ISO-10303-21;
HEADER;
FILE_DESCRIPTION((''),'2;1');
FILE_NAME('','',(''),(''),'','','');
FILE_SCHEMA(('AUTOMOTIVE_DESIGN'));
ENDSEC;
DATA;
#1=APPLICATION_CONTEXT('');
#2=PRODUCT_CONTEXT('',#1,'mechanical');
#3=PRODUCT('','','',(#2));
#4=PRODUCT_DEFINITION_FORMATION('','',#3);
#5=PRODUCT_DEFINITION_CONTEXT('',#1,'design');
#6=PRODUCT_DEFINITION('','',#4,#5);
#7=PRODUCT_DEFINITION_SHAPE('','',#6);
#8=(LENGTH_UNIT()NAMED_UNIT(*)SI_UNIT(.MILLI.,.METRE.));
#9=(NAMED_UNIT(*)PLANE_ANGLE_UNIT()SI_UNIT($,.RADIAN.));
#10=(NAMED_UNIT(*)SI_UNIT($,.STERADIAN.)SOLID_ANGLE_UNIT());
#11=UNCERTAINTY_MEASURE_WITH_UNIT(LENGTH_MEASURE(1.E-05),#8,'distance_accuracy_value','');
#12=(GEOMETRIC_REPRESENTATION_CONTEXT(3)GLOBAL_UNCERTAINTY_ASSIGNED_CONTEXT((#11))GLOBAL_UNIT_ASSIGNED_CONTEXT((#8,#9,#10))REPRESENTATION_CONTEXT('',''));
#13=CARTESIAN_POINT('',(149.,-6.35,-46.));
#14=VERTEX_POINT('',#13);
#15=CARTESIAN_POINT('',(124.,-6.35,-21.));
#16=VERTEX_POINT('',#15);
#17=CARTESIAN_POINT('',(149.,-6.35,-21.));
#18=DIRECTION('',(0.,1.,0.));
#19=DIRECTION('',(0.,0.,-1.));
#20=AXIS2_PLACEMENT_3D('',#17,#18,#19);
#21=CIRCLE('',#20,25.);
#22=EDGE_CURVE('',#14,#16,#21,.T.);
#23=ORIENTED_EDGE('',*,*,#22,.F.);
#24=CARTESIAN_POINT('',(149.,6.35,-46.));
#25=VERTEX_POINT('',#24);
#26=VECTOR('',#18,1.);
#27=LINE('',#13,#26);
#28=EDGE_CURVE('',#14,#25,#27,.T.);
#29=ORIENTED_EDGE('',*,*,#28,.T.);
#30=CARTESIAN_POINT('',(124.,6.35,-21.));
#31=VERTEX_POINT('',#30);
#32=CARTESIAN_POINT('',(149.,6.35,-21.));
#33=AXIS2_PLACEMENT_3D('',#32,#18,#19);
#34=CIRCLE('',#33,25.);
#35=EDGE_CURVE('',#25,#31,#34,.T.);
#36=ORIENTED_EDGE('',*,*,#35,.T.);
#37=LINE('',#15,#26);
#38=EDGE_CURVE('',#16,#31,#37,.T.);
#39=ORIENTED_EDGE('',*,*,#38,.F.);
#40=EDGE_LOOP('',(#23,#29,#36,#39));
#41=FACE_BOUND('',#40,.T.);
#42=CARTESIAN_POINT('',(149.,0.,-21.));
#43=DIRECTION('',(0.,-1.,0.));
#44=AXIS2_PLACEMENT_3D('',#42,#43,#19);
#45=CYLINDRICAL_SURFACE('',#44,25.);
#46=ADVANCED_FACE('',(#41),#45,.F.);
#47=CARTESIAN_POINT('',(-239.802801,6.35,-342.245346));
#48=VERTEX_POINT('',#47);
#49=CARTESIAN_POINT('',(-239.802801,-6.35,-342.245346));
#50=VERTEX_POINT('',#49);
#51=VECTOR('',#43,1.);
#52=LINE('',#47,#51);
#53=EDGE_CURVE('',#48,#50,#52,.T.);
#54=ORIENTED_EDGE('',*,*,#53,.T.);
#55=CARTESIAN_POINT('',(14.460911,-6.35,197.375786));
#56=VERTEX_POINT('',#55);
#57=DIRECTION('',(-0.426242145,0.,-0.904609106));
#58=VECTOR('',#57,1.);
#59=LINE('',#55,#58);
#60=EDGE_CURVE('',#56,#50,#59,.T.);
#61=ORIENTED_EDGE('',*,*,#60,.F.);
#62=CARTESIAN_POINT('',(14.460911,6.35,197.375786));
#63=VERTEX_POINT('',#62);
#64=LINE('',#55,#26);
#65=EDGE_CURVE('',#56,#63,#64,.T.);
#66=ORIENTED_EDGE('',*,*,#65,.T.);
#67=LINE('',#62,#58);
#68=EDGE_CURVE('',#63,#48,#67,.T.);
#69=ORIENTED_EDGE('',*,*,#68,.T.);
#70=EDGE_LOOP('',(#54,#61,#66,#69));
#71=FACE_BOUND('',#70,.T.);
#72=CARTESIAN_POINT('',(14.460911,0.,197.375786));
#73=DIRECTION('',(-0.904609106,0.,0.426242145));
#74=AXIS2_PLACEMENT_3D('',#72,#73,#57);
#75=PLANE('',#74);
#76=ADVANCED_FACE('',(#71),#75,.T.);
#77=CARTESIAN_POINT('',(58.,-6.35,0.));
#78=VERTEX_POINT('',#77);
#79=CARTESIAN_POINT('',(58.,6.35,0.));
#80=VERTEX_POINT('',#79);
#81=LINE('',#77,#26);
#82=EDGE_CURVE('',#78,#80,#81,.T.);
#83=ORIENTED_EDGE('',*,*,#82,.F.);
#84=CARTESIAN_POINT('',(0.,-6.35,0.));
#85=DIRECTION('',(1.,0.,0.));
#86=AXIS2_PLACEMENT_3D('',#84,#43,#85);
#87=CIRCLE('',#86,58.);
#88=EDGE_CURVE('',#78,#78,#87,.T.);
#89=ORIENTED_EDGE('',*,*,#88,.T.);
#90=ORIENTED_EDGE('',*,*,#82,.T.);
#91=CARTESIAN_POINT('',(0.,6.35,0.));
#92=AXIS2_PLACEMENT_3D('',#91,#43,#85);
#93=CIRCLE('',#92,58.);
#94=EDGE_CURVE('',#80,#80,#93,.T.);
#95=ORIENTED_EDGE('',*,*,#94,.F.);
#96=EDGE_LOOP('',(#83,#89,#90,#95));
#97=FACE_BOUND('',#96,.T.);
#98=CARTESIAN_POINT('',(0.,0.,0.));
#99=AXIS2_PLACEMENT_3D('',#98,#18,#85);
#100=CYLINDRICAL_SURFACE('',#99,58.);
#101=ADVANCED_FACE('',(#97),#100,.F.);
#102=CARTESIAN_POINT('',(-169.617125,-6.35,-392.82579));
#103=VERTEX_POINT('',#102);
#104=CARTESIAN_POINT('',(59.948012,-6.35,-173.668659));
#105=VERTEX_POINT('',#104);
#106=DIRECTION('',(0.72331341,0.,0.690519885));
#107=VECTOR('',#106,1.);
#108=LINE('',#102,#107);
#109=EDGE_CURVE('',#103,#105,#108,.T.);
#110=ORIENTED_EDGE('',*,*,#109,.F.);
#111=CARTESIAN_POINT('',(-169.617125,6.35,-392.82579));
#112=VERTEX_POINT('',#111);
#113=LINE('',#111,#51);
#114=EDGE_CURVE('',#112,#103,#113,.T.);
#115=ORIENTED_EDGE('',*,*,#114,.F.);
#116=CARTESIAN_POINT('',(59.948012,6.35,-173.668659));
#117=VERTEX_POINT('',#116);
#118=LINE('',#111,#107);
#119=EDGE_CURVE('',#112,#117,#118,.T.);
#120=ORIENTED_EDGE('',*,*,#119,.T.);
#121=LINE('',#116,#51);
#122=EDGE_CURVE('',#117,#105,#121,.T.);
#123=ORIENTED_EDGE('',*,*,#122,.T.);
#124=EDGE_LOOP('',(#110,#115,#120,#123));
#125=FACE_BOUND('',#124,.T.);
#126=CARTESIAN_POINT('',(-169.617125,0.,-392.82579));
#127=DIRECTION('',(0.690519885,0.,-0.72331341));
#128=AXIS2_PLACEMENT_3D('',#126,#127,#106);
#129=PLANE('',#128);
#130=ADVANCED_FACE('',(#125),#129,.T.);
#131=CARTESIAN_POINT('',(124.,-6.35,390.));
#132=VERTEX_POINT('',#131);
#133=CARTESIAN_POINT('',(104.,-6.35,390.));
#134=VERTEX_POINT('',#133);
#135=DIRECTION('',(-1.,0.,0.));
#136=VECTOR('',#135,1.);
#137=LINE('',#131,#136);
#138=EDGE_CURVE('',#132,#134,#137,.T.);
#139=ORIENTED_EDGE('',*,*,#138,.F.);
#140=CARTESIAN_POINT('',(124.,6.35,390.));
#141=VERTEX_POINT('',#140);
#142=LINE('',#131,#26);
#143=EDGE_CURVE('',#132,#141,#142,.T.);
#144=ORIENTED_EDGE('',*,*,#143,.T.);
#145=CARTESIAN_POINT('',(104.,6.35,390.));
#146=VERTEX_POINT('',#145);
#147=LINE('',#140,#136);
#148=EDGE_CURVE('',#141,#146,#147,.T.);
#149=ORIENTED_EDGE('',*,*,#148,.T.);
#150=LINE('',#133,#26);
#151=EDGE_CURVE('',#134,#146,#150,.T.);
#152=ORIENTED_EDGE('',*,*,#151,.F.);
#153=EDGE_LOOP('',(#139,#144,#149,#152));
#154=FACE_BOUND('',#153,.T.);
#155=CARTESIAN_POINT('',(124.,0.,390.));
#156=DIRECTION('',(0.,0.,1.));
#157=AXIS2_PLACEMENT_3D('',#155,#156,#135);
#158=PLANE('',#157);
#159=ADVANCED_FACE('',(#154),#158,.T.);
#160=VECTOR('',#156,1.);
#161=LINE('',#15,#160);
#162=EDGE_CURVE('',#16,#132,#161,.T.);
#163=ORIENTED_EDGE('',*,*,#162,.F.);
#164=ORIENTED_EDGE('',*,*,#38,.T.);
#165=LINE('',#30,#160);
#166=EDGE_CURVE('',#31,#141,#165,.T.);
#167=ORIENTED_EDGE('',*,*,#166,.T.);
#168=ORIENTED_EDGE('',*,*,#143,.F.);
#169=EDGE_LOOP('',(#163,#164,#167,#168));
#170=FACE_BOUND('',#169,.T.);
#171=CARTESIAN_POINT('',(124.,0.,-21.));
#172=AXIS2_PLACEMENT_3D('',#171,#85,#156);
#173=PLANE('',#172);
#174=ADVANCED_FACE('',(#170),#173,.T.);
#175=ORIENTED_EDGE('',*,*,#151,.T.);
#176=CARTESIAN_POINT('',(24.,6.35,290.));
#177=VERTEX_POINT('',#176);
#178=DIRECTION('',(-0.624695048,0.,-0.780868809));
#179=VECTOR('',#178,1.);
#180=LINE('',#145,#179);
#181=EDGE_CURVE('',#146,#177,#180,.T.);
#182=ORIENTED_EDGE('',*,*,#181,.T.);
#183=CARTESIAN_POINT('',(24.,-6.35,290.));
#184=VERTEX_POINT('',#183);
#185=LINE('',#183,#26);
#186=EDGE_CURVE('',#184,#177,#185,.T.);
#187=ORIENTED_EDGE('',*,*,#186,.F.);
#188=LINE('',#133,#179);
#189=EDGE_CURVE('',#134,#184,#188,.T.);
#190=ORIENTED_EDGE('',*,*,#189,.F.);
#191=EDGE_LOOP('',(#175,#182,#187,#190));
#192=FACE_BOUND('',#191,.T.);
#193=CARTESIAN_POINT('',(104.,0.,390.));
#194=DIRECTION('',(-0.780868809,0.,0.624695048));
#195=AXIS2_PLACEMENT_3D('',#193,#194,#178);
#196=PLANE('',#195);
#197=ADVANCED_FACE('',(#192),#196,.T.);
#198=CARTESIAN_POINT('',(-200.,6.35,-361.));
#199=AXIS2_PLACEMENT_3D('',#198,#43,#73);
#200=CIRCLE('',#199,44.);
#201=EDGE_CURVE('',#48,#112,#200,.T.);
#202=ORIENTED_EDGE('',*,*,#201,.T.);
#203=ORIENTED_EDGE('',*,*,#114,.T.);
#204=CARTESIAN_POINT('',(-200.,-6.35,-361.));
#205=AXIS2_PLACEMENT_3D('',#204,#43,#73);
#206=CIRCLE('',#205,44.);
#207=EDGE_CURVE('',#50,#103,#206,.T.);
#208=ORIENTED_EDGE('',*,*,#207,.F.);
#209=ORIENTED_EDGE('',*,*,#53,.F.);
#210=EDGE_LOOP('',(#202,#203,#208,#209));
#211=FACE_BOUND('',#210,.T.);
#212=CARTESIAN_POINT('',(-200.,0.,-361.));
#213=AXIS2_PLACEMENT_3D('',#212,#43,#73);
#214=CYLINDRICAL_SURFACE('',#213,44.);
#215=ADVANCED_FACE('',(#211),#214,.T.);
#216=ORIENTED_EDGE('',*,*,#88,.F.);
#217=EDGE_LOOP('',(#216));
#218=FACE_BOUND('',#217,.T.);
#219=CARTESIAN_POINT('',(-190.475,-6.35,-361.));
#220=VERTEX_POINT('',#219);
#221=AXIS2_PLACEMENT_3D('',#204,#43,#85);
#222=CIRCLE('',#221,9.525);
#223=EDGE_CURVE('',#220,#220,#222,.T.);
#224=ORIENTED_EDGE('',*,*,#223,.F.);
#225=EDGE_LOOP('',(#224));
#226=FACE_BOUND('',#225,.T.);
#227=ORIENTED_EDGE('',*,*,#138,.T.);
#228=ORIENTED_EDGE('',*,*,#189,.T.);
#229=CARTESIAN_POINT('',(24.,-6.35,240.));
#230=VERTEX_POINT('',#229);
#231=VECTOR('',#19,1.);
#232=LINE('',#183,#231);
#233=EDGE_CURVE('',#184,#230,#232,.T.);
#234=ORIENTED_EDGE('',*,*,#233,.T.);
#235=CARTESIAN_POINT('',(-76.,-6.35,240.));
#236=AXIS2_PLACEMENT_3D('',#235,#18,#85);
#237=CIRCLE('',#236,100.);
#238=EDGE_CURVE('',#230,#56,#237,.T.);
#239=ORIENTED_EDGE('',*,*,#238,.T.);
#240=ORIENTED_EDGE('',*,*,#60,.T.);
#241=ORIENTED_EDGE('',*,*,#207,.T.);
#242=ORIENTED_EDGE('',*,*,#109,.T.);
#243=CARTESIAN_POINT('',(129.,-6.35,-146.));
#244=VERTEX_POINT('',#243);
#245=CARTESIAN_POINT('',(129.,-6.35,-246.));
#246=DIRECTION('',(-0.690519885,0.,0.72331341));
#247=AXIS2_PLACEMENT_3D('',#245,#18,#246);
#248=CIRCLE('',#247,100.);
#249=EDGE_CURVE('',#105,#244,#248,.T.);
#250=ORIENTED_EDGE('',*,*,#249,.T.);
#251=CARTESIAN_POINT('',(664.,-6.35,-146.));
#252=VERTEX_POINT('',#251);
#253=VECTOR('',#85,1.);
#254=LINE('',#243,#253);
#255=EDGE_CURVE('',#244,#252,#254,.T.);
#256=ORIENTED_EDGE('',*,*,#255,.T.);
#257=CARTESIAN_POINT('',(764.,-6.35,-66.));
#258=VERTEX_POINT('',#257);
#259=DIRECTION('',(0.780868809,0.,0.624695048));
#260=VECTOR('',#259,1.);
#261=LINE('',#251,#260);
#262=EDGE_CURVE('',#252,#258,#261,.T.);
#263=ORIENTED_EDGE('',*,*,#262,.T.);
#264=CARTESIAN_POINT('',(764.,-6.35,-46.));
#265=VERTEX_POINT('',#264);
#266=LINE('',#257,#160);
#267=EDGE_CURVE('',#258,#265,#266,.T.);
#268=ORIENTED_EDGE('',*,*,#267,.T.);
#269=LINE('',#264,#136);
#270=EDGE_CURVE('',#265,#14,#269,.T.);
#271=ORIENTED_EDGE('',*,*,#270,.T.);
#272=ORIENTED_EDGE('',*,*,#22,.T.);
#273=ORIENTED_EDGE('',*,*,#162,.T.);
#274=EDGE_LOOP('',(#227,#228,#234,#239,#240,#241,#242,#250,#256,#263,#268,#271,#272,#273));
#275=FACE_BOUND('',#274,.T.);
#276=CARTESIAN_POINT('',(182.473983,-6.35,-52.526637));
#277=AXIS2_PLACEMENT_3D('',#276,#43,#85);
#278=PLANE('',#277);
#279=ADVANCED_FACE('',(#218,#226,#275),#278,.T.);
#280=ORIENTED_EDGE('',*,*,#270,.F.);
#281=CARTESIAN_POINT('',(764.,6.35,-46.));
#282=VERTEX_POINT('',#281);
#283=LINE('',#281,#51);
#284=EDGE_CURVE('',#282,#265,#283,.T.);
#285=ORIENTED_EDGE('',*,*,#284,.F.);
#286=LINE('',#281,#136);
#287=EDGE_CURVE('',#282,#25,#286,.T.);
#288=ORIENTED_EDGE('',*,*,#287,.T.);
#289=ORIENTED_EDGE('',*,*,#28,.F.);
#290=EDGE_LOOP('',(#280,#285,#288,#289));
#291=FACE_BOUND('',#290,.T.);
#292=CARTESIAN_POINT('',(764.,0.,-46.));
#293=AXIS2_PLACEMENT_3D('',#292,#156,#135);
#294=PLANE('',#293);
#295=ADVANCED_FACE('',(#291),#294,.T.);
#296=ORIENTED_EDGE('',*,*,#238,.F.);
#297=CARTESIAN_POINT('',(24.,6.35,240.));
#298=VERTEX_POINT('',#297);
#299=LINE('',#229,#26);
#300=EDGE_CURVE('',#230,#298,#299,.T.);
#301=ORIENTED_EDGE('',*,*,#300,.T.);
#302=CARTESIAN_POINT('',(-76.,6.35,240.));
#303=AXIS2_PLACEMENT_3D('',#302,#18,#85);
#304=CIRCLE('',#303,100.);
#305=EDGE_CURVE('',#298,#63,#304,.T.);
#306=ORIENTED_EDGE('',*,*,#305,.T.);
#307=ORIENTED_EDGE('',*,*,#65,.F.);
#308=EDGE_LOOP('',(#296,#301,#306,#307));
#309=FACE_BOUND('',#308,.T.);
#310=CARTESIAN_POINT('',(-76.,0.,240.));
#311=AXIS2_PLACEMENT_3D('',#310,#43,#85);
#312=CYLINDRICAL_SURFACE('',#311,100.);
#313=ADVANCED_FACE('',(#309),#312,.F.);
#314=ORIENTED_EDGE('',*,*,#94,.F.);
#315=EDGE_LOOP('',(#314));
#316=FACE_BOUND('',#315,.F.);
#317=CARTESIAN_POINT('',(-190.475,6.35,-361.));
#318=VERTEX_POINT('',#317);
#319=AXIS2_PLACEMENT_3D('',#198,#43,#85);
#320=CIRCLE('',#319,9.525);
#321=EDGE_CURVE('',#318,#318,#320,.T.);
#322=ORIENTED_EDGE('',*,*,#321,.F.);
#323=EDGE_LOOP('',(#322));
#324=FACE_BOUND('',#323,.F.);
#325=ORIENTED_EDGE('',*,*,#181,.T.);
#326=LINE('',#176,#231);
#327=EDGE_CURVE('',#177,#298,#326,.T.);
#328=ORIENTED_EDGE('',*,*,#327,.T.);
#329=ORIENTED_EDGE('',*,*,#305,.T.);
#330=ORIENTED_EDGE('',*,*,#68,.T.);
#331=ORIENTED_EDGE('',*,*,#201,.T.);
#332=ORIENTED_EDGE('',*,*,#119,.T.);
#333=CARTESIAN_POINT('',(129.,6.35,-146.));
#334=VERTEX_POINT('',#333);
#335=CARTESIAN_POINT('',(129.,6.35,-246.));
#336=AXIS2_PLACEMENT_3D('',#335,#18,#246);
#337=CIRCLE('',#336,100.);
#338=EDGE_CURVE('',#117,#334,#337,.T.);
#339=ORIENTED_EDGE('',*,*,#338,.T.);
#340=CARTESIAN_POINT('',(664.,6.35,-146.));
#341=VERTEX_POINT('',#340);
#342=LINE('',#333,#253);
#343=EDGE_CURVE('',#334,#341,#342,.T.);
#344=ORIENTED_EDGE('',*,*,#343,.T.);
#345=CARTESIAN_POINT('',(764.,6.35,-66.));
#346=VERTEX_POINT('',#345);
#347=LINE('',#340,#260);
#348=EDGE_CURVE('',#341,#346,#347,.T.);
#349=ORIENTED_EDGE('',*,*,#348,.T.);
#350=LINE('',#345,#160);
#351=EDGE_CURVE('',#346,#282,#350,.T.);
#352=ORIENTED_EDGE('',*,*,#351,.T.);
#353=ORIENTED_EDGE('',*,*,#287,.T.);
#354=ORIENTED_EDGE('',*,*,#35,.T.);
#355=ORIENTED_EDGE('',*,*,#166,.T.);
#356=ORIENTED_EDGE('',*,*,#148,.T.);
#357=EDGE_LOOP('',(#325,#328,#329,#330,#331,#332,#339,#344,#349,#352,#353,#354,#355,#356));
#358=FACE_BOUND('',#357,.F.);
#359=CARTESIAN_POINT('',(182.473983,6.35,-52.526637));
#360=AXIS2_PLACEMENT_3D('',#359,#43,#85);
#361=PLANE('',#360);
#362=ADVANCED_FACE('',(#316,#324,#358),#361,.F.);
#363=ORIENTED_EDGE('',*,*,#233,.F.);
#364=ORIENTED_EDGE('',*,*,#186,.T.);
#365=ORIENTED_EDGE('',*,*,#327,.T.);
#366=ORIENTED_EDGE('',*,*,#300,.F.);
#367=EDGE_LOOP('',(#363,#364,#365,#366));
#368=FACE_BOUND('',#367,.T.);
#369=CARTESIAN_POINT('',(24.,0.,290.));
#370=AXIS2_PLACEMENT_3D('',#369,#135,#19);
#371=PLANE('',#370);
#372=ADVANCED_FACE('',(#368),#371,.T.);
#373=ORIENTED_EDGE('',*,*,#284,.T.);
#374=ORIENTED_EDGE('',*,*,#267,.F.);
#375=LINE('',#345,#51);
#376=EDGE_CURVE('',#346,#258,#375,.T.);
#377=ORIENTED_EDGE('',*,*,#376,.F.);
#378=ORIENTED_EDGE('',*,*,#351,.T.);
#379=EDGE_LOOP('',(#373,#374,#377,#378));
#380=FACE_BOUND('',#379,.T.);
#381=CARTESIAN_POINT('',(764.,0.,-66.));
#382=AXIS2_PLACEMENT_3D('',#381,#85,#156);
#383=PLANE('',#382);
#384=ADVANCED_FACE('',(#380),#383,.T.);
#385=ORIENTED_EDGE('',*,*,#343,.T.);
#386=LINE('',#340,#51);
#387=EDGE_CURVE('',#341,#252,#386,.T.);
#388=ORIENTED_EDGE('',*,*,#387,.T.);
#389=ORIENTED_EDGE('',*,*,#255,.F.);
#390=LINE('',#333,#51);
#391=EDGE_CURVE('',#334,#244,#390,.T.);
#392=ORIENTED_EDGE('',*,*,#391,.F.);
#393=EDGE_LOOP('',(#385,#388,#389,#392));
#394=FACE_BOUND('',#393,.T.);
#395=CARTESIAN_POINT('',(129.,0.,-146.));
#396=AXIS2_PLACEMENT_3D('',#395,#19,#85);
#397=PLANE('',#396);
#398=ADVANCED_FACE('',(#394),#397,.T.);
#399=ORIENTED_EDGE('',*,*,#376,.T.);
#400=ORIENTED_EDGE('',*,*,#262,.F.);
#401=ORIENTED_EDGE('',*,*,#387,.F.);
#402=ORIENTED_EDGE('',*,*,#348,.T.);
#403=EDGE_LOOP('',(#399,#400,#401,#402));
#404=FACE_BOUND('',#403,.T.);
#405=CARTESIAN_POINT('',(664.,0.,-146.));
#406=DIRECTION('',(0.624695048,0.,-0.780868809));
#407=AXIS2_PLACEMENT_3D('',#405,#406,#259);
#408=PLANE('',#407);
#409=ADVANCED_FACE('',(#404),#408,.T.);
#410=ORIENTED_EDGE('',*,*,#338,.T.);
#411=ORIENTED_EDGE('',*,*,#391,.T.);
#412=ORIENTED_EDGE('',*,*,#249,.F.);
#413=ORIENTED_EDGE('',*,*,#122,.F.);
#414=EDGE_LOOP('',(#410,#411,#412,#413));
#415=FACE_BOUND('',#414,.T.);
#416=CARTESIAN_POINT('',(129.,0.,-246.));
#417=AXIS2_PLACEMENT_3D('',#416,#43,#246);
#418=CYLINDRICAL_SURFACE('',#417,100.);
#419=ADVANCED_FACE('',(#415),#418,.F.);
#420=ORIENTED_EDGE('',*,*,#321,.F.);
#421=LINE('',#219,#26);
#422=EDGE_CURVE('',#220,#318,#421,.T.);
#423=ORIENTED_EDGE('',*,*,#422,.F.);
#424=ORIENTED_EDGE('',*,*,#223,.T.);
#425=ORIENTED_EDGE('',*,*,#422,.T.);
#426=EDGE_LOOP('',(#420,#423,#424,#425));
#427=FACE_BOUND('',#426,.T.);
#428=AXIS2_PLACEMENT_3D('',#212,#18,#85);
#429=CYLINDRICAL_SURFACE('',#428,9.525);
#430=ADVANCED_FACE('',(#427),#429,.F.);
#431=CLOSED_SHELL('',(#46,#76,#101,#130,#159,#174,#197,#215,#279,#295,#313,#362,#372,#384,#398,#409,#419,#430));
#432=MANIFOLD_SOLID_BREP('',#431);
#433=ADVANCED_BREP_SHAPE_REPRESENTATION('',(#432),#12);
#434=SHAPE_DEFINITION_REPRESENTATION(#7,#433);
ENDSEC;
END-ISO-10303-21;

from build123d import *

# Parameters (mm, degrees)
F0_R     = 9.525
F0_R_2   = 58
F1_DEPTH = 6.35


# Not quite as in the source:
# - a feature names something its author has since deleted; it is built from what else it names


with BuildPart() as f1:
    # F0 (on Front) → F1 (new body, symmetric)
    with BuildSketch(Plane.XZ):
        with BuildLine():
            Line((14.4609105581, 197.3757855088), (-239.8028006456, -342.2453456239))
            ThreePointArc((-239.8028006456, -342.2453456239), (-225.7250673292, -396.6962310463), (-169.6171250668, -392.8257900262))
            Line((-169.6171250668, -392.8257900262), (59.9480115155, -173.6686590313))
            ThreePointArc((59.9480115155, -173.6686590313), (91.8054714835, -153.1745344831), (129, -146))
            Line((129, -146), (664, -146))
            Line((664, -146), (764, -66))
            Line((764, -66), (764, -46))
            Line((764, -46), (149, -46))
            ThreePointArc((149, -46), (131.3223304703, -38.6776695297), (124, -21))
            Line((124, -21), (124, 390))
            Line((124, 390), (104, 390))
            Line((104, 390), (24, 290))
            Line((24, 290), (24, 240))
            ThreePointArc((24, 240), (21.5860929022, 218.1607126469), (14.4609105581, 197.3757855088))
        make_face()
        with Locations((-200, -361)):
            Circle(F0_R, mode=Mode.SUBTRACT)
        Circle(F0_R_2, mode=Mode.SUBTRACT)
    extrude(amount=F1_DEPTH, both=True)


solid = f1.part
